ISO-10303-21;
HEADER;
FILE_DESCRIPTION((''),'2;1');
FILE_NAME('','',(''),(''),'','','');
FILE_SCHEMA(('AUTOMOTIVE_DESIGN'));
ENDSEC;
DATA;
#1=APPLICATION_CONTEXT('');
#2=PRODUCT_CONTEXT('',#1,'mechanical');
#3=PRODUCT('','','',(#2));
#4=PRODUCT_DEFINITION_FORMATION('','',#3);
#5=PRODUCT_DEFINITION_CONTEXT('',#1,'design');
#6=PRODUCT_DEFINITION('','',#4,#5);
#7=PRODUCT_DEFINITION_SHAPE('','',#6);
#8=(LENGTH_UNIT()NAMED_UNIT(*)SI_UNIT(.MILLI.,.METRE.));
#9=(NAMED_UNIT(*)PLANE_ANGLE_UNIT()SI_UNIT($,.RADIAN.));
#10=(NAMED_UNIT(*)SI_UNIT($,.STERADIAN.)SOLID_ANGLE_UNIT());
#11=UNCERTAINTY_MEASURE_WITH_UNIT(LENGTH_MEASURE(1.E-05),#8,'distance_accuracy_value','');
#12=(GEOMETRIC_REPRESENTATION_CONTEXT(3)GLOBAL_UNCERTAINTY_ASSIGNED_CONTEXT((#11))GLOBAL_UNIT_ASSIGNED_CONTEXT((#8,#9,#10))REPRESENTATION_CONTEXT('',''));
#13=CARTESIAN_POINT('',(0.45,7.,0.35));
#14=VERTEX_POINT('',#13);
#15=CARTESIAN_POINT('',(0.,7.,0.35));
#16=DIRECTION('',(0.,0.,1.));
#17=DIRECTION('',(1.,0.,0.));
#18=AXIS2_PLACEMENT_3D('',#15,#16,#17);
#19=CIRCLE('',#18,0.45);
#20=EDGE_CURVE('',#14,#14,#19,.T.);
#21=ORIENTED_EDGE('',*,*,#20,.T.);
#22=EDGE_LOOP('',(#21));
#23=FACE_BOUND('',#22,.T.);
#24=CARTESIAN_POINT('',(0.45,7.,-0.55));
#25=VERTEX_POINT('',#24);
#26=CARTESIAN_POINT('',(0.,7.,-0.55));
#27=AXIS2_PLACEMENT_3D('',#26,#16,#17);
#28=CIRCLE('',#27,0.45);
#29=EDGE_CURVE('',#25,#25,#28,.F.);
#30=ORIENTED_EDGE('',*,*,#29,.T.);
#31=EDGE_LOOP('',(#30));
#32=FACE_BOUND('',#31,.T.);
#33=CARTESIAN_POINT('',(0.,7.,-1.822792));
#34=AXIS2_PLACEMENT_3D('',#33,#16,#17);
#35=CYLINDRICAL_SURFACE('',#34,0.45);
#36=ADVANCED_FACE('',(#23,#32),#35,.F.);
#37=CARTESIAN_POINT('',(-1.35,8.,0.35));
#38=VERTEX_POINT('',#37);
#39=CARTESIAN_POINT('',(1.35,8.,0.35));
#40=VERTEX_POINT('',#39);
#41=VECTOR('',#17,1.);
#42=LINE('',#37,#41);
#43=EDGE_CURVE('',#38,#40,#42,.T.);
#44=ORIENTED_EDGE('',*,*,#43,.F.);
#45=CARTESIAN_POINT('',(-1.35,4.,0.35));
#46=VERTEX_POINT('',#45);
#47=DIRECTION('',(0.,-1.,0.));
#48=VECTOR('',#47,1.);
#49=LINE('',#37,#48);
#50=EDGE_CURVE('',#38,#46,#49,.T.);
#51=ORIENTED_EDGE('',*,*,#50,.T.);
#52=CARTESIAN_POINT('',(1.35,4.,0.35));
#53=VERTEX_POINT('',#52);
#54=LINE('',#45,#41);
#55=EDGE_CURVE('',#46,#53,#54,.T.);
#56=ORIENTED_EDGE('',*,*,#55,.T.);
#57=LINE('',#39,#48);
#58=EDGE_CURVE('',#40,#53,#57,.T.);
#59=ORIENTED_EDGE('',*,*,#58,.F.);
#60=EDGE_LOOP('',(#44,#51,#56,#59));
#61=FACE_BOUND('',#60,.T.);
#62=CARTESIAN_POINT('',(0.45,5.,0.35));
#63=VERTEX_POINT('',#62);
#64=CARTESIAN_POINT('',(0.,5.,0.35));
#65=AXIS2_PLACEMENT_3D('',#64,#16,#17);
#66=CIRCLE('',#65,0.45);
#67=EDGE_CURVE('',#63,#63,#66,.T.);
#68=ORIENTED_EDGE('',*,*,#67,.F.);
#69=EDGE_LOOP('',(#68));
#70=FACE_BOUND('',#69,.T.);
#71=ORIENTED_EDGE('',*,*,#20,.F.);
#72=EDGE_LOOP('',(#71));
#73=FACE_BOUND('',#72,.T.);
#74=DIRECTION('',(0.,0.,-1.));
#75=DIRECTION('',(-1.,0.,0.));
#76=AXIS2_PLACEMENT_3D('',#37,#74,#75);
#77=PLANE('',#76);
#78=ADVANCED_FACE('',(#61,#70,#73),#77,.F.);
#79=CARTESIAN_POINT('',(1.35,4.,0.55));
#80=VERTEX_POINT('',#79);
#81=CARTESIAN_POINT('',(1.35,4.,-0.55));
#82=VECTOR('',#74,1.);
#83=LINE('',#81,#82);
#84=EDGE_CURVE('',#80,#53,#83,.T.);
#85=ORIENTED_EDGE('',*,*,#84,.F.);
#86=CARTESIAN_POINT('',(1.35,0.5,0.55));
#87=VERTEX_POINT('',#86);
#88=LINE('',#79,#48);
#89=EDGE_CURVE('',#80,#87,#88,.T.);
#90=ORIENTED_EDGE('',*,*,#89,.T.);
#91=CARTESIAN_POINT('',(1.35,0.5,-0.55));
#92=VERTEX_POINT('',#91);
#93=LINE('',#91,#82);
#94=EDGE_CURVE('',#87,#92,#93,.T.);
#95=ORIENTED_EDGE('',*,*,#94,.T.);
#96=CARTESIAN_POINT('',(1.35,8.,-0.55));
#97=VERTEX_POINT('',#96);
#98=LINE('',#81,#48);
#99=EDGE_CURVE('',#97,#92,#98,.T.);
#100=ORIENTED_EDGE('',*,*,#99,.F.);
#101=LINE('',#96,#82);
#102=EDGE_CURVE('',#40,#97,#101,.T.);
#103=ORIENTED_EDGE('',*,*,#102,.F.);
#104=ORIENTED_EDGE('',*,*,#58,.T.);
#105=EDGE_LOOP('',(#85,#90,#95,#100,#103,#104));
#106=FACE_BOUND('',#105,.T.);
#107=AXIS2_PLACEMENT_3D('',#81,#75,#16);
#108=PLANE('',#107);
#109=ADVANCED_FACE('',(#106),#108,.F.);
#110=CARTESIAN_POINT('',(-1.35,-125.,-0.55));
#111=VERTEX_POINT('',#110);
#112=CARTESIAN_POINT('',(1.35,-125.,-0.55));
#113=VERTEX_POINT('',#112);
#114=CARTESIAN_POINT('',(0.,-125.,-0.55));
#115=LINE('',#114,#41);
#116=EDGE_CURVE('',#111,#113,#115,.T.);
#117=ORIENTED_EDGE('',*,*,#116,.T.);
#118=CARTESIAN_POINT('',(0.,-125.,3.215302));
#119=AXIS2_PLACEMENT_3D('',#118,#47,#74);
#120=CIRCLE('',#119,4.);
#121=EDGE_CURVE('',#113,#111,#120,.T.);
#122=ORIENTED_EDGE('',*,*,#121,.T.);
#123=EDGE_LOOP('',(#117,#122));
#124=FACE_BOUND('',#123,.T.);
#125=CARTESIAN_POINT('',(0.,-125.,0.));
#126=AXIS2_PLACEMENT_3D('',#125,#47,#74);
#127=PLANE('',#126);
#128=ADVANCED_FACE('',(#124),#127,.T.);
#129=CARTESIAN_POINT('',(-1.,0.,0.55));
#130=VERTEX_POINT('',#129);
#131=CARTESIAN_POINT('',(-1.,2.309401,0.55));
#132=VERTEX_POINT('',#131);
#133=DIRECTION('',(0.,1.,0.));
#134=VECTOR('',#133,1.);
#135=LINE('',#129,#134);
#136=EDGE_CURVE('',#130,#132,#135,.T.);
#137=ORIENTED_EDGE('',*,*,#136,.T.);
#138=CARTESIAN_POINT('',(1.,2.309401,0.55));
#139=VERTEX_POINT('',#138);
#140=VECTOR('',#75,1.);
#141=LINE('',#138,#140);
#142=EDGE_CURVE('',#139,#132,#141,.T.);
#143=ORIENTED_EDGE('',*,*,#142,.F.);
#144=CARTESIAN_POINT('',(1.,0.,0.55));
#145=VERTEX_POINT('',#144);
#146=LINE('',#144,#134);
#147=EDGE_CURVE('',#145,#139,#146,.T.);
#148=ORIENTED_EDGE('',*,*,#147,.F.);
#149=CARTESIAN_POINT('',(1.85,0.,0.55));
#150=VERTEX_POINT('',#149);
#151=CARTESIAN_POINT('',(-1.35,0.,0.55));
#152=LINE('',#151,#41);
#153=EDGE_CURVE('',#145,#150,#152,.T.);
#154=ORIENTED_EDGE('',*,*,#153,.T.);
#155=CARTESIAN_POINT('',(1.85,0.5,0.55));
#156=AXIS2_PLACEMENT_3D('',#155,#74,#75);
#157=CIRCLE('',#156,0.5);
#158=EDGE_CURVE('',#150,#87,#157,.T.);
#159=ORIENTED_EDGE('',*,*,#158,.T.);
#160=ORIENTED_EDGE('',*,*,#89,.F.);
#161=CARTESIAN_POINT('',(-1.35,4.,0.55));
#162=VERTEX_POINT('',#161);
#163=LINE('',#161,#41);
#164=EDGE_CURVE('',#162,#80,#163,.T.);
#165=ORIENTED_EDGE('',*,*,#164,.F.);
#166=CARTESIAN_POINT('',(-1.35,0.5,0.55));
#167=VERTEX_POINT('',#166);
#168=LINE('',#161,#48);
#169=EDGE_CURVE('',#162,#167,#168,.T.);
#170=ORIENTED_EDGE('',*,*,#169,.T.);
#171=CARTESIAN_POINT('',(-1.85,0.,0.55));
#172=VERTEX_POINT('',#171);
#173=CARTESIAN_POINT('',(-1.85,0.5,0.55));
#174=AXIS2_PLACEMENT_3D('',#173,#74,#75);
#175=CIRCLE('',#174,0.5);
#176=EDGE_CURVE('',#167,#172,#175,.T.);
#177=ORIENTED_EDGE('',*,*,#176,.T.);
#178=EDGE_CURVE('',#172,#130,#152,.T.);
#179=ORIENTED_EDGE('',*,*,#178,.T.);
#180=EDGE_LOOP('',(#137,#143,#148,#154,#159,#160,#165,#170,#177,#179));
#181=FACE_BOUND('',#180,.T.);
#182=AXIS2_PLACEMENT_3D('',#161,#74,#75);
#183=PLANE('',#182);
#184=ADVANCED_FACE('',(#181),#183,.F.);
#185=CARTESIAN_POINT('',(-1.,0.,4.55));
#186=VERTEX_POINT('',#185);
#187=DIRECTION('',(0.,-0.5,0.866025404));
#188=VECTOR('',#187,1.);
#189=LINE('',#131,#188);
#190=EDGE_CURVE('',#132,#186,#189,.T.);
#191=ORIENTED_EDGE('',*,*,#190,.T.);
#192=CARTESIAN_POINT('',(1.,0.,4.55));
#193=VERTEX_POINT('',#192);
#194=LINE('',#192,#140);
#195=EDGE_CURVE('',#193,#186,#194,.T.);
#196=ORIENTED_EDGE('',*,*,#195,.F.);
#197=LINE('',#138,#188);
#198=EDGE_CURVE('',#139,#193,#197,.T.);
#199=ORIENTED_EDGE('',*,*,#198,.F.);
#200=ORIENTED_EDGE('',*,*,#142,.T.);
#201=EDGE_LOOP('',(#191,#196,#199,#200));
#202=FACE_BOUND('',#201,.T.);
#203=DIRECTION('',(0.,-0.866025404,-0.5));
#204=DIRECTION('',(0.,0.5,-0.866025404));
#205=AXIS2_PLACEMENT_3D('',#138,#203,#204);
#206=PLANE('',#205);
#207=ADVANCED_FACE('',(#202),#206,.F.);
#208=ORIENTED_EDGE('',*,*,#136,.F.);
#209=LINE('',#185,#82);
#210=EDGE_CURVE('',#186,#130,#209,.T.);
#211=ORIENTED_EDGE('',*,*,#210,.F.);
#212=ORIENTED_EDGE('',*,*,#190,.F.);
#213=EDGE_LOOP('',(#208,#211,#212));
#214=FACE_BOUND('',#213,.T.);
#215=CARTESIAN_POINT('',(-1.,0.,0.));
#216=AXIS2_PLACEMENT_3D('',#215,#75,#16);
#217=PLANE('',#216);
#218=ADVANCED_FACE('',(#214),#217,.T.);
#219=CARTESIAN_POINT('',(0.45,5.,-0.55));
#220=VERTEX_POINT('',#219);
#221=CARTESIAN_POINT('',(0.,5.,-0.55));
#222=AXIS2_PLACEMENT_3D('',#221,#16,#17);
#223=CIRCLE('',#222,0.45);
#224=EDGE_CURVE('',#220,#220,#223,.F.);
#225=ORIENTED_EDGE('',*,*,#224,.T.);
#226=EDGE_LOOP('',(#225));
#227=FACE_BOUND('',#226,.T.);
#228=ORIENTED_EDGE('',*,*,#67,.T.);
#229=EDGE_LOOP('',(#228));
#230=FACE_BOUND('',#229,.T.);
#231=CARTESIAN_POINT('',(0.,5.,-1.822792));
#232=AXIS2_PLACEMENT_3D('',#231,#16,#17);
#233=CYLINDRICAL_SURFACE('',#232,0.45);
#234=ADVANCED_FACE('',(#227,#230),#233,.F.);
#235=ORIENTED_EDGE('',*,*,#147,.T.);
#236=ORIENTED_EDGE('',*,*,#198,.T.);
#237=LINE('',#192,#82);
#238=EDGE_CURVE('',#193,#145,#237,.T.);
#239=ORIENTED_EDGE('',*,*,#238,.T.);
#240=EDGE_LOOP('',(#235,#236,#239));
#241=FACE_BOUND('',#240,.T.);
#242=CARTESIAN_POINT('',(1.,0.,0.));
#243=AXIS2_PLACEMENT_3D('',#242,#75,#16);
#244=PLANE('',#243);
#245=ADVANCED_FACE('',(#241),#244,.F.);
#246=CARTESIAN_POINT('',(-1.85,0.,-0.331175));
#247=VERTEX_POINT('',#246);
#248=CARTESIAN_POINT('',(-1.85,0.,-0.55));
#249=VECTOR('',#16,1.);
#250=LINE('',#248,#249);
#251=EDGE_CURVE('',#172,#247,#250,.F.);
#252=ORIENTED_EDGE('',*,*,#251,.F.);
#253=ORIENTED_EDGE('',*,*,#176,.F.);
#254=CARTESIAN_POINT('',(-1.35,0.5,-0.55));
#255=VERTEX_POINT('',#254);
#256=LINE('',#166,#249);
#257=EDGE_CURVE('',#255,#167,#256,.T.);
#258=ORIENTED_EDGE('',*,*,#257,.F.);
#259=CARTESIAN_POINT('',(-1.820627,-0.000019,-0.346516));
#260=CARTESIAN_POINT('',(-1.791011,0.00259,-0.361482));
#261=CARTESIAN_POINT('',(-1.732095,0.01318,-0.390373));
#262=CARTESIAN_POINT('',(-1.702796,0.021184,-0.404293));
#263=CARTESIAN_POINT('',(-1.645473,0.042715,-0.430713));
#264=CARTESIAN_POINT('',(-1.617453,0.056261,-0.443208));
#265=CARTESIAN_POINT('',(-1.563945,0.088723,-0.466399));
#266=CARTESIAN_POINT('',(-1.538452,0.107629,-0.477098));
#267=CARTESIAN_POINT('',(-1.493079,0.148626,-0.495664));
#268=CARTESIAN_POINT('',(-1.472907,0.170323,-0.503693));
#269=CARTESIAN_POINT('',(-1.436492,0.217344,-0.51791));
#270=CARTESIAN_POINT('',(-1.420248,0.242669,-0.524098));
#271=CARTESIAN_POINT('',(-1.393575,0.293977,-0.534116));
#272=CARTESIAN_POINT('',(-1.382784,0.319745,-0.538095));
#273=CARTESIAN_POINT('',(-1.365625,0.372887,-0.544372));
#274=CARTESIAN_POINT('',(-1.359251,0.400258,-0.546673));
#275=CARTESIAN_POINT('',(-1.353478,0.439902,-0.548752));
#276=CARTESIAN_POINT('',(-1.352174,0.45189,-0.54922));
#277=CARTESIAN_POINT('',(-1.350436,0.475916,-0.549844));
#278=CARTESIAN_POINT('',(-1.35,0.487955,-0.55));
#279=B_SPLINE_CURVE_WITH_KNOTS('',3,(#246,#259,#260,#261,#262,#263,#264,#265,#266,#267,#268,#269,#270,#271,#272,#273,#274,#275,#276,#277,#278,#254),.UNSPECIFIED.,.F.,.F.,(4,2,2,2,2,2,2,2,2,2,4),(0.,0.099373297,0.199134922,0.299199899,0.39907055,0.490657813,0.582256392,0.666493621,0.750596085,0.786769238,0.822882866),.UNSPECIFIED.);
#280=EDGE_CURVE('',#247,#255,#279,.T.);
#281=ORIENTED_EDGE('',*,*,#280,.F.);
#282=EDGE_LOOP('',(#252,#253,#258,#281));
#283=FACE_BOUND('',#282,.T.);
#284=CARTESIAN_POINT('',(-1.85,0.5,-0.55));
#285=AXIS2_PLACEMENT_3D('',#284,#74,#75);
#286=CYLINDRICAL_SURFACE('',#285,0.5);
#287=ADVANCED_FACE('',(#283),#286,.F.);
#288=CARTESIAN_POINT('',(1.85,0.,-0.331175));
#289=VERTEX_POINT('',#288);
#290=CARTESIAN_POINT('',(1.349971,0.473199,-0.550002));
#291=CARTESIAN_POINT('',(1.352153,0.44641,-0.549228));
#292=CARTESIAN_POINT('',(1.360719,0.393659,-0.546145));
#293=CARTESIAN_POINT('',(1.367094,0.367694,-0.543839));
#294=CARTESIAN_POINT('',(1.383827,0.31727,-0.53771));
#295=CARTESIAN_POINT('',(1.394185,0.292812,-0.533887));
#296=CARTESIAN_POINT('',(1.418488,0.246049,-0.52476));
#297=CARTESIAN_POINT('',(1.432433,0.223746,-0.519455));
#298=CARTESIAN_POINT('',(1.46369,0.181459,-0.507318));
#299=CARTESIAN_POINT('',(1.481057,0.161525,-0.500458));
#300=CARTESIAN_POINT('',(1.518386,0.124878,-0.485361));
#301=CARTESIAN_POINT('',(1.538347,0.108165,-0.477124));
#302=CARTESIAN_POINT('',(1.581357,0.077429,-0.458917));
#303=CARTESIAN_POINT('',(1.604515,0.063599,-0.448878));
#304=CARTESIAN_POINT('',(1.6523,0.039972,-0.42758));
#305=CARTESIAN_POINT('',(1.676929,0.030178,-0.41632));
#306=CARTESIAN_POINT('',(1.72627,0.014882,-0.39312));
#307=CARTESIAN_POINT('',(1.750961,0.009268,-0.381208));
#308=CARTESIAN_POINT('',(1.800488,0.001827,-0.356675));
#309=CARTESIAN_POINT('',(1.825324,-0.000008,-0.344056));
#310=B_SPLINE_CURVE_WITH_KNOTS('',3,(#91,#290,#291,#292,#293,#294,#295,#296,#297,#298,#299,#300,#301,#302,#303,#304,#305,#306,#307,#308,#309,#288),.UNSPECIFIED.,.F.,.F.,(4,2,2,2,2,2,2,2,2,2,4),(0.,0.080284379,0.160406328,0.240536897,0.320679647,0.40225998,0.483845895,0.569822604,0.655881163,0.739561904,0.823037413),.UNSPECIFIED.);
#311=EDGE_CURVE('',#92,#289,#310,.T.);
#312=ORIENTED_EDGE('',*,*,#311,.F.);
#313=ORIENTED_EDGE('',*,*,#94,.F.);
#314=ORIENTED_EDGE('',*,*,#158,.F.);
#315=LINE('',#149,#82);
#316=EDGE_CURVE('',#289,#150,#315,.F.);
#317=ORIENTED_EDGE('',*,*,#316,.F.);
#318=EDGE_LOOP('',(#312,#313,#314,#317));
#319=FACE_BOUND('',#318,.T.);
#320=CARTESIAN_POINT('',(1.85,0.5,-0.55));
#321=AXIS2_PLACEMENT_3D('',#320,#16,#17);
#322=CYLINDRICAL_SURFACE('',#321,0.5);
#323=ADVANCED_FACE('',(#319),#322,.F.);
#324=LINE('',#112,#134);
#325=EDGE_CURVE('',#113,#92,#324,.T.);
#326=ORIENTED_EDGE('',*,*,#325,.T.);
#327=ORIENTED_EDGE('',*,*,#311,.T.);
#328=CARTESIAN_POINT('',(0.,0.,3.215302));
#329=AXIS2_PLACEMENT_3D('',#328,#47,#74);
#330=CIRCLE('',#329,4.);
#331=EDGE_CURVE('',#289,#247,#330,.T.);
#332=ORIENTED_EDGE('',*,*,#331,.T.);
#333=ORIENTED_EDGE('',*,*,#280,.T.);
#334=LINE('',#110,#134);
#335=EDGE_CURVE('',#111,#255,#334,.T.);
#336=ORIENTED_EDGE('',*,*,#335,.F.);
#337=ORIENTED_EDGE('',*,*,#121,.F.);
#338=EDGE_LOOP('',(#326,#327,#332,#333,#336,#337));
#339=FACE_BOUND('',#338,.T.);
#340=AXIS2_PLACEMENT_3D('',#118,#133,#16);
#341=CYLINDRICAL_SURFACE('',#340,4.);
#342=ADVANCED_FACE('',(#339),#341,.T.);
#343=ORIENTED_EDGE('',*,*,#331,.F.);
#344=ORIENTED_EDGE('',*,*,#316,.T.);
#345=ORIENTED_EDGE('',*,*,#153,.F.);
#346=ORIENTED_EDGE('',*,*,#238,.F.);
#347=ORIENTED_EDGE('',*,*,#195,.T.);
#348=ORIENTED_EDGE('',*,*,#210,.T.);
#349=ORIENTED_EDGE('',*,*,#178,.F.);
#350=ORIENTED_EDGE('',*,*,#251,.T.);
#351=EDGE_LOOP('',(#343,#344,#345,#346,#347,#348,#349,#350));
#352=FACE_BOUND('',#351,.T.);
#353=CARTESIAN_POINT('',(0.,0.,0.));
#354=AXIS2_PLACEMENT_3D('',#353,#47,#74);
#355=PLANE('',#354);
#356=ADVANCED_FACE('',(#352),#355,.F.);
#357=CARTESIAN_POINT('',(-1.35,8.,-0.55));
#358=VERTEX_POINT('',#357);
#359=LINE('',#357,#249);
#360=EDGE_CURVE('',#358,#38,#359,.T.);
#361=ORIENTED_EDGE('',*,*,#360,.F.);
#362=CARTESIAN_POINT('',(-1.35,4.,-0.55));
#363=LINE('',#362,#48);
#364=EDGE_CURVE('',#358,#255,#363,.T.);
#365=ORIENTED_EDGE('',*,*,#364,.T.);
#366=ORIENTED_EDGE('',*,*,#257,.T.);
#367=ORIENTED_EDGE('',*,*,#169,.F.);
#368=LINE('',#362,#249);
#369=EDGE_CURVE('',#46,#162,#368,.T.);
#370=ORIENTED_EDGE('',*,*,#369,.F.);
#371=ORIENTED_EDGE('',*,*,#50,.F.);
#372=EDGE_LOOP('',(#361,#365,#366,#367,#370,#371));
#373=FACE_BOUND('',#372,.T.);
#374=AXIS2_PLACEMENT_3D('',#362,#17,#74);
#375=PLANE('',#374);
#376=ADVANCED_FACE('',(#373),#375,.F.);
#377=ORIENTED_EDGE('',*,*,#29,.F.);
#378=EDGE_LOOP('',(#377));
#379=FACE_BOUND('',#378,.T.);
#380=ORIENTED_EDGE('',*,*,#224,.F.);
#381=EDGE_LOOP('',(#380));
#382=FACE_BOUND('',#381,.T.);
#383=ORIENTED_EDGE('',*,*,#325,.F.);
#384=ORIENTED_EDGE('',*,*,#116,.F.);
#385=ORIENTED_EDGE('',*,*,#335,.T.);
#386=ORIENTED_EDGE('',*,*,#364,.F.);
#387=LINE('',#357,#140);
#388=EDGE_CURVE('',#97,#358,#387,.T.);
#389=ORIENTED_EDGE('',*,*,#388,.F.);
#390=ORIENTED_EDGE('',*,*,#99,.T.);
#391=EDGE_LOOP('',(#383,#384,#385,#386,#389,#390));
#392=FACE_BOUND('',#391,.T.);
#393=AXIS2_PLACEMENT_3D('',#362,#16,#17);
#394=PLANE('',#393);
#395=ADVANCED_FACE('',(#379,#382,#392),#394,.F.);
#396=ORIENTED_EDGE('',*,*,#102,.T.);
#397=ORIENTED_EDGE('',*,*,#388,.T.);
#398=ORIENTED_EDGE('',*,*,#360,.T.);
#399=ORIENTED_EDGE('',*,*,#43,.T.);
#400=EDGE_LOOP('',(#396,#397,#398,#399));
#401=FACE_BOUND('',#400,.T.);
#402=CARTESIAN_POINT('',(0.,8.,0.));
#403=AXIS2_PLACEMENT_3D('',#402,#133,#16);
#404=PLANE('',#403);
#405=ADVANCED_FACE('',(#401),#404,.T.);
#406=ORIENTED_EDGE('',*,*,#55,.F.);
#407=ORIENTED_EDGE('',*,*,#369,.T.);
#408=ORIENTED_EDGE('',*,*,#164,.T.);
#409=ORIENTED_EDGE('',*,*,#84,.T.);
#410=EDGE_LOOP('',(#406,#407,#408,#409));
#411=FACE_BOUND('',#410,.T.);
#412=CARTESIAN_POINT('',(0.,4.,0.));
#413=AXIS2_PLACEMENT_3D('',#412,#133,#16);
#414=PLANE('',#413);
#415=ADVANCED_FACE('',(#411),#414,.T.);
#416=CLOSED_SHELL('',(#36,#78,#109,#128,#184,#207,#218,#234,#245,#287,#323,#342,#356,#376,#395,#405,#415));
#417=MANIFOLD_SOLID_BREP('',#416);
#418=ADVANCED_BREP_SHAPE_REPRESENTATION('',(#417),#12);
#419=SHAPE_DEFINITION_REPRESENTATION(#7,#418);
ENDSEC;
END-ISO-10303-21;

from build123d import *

# Parameters (mm, degrees)
SKETCH1_W              = 2.7
SKETCH1_H              = 1.1
BOSS_EXTRUDE1_DEPTH    = 4
SKETCH2_W              = 2.7
SKETCH2_H              = 0.9
BOSS_EXTRUDE2_DEPTH    = 4
SKETCH3_W              = 2.7
SKETCH3_H              = 1.1
LENGHT_EXTRUSION_DEPTH = 125
BOSS_EXTRUDE4_DEPTH    = 1
FILLET8_R              = 0.5
SKETCH7_R              = 0.45
CUT_EXTRUDE1_DEPTH     = 0.9


with BuildPart() as part:
    # Sketch1 → Boss-Extrude1 (new body)
    with BuildSketch(Plane(origin=(0, 0, 0), x_dir=(1, 0, 0), z_dir=(0, 1, 0))):
        Rectangle(SKETCH1_W, SKETCH1_H)
    extrude(amount=BOSS_EXTRUDE1_DEPTH)

    # Sketch2 → Boss-Extrude2 (add)
    with BuildSketch(Plane(origin=(0, 4, 0), x_dir=(1, 0, 0), z_dir=(0, 1, 0))):
        with Locations((0, 0.1)):
            Rectangle(SKETCH2_W, SKETCH2_H)
    extrude(amount=BOSS_EXTRUDE2_DEPTH)

    # Sketch3 → lenght extrusion (add)
    with BuildSketch(Plane.XZ):
        with BuildLine():
            ThreePointArc((4, 3.215302113), (-2.302172887, 6.486387559), (-1.35, -0.55))
            Line((-1.35, -0.55), (-1.35, 0.55))
            Line((-1.35, 0.55), (1.35, 0.55))
            Line((1.35, 0.55), (1.35, -0.55))
            ThreePointArc((1.35, -0.55), (3.271085447, 0.913129226), (4, 3.215302113))
        make_face()
        Rectangle(SKETCH3_W, SKETCH3_H)
    extrude(amount=LENGHT_EXTRUSION_DEPTH)

    # Sketch6 → Boss-Extrude4 (add, symmetric)
    with BuildSketch(Plane(origin=(0, 0, 0), x_dir=(0, 0, -1), z_dir=(1, 0, 0))):
        Polygon((-0.55, 2.309401077), (-4.55, 0), (-0.55, 0), align=None)
    extrude(amount=BOSS_EXTRUDE4_DEPTH, both=True)

    # Fillet8
    # the kernel refuses this fillet: 0.5 mm, written as the material it adds along each edge
    with BuildSketch(Plane(origin=(-1.35, 0, 0.55), x_dir=(0, 1, 0), z_dir=(0, 0, -1))) as fillet8_piece_1_section:
        with BuildLine():
            CenterArc((FILLET8_R, -FILLET8_R), FILLET8_R, 90, 90)
            Line((0, -FILLET8_R), (0, 0))
            Line((0, 0), (FILLET8_R, 0))
        make_face()
    fillet8_piece_1 = extrude(amount=1.1, mode=Mode.PRIVATE)
    fillet8_piece_1 = fillet8_piece_1 & Plane(origin=(0, 0.115807934, 3.215302113), x_dir=(1, 0, 0), z_dir=(0, 1, 0)) * Cylinder(4, 5, mode=Mode.PRIVATE)
    add(fillet8_piece_1)
    with BuildSketch(Plane(origin=(1.35, 0, -0.55), x_dir=(0, 1, 0), z_dir=(0, 0, 1))) as fillet8_piece_2_section:
        with BuildLine():
            CenterArc((FILLET8_R, -FILLET8_R), FILLET8_R, 90, 90)
            Line((0, -FILLET8_R), (0, 0))
            Line((0, 0), (FILLET8_R, 0))
        make_face()
    fillet8_piece_2 = extrude(amount=1.1, mode=Mode.PRIVATE)
    fillet8_piece_2 = fillet8_piece_2 & Plane(origin=(0, 0.11580798, 3.215302113), x_dir=(1, 0, 0), z_dir=(0, 1, 0)) * Cylinder(4, 5, mode=Mode.PRIVATE)
    add(fillet8_piece_2)

    # Sketch7 → Cut-Extrude1 (cut)
    with BuildSketch(Plane.XY.offset(0.35)):
        with Locations((0, 5)):
            Circle(SKETCH7_R)
        with Locations((0, 7)):
            Circle(SKETCH7_R)
    extrude(amount=-CUT_EXTRUDE1_DEPTH, mode=Mode.SUBTRACT)


solid = part.part
